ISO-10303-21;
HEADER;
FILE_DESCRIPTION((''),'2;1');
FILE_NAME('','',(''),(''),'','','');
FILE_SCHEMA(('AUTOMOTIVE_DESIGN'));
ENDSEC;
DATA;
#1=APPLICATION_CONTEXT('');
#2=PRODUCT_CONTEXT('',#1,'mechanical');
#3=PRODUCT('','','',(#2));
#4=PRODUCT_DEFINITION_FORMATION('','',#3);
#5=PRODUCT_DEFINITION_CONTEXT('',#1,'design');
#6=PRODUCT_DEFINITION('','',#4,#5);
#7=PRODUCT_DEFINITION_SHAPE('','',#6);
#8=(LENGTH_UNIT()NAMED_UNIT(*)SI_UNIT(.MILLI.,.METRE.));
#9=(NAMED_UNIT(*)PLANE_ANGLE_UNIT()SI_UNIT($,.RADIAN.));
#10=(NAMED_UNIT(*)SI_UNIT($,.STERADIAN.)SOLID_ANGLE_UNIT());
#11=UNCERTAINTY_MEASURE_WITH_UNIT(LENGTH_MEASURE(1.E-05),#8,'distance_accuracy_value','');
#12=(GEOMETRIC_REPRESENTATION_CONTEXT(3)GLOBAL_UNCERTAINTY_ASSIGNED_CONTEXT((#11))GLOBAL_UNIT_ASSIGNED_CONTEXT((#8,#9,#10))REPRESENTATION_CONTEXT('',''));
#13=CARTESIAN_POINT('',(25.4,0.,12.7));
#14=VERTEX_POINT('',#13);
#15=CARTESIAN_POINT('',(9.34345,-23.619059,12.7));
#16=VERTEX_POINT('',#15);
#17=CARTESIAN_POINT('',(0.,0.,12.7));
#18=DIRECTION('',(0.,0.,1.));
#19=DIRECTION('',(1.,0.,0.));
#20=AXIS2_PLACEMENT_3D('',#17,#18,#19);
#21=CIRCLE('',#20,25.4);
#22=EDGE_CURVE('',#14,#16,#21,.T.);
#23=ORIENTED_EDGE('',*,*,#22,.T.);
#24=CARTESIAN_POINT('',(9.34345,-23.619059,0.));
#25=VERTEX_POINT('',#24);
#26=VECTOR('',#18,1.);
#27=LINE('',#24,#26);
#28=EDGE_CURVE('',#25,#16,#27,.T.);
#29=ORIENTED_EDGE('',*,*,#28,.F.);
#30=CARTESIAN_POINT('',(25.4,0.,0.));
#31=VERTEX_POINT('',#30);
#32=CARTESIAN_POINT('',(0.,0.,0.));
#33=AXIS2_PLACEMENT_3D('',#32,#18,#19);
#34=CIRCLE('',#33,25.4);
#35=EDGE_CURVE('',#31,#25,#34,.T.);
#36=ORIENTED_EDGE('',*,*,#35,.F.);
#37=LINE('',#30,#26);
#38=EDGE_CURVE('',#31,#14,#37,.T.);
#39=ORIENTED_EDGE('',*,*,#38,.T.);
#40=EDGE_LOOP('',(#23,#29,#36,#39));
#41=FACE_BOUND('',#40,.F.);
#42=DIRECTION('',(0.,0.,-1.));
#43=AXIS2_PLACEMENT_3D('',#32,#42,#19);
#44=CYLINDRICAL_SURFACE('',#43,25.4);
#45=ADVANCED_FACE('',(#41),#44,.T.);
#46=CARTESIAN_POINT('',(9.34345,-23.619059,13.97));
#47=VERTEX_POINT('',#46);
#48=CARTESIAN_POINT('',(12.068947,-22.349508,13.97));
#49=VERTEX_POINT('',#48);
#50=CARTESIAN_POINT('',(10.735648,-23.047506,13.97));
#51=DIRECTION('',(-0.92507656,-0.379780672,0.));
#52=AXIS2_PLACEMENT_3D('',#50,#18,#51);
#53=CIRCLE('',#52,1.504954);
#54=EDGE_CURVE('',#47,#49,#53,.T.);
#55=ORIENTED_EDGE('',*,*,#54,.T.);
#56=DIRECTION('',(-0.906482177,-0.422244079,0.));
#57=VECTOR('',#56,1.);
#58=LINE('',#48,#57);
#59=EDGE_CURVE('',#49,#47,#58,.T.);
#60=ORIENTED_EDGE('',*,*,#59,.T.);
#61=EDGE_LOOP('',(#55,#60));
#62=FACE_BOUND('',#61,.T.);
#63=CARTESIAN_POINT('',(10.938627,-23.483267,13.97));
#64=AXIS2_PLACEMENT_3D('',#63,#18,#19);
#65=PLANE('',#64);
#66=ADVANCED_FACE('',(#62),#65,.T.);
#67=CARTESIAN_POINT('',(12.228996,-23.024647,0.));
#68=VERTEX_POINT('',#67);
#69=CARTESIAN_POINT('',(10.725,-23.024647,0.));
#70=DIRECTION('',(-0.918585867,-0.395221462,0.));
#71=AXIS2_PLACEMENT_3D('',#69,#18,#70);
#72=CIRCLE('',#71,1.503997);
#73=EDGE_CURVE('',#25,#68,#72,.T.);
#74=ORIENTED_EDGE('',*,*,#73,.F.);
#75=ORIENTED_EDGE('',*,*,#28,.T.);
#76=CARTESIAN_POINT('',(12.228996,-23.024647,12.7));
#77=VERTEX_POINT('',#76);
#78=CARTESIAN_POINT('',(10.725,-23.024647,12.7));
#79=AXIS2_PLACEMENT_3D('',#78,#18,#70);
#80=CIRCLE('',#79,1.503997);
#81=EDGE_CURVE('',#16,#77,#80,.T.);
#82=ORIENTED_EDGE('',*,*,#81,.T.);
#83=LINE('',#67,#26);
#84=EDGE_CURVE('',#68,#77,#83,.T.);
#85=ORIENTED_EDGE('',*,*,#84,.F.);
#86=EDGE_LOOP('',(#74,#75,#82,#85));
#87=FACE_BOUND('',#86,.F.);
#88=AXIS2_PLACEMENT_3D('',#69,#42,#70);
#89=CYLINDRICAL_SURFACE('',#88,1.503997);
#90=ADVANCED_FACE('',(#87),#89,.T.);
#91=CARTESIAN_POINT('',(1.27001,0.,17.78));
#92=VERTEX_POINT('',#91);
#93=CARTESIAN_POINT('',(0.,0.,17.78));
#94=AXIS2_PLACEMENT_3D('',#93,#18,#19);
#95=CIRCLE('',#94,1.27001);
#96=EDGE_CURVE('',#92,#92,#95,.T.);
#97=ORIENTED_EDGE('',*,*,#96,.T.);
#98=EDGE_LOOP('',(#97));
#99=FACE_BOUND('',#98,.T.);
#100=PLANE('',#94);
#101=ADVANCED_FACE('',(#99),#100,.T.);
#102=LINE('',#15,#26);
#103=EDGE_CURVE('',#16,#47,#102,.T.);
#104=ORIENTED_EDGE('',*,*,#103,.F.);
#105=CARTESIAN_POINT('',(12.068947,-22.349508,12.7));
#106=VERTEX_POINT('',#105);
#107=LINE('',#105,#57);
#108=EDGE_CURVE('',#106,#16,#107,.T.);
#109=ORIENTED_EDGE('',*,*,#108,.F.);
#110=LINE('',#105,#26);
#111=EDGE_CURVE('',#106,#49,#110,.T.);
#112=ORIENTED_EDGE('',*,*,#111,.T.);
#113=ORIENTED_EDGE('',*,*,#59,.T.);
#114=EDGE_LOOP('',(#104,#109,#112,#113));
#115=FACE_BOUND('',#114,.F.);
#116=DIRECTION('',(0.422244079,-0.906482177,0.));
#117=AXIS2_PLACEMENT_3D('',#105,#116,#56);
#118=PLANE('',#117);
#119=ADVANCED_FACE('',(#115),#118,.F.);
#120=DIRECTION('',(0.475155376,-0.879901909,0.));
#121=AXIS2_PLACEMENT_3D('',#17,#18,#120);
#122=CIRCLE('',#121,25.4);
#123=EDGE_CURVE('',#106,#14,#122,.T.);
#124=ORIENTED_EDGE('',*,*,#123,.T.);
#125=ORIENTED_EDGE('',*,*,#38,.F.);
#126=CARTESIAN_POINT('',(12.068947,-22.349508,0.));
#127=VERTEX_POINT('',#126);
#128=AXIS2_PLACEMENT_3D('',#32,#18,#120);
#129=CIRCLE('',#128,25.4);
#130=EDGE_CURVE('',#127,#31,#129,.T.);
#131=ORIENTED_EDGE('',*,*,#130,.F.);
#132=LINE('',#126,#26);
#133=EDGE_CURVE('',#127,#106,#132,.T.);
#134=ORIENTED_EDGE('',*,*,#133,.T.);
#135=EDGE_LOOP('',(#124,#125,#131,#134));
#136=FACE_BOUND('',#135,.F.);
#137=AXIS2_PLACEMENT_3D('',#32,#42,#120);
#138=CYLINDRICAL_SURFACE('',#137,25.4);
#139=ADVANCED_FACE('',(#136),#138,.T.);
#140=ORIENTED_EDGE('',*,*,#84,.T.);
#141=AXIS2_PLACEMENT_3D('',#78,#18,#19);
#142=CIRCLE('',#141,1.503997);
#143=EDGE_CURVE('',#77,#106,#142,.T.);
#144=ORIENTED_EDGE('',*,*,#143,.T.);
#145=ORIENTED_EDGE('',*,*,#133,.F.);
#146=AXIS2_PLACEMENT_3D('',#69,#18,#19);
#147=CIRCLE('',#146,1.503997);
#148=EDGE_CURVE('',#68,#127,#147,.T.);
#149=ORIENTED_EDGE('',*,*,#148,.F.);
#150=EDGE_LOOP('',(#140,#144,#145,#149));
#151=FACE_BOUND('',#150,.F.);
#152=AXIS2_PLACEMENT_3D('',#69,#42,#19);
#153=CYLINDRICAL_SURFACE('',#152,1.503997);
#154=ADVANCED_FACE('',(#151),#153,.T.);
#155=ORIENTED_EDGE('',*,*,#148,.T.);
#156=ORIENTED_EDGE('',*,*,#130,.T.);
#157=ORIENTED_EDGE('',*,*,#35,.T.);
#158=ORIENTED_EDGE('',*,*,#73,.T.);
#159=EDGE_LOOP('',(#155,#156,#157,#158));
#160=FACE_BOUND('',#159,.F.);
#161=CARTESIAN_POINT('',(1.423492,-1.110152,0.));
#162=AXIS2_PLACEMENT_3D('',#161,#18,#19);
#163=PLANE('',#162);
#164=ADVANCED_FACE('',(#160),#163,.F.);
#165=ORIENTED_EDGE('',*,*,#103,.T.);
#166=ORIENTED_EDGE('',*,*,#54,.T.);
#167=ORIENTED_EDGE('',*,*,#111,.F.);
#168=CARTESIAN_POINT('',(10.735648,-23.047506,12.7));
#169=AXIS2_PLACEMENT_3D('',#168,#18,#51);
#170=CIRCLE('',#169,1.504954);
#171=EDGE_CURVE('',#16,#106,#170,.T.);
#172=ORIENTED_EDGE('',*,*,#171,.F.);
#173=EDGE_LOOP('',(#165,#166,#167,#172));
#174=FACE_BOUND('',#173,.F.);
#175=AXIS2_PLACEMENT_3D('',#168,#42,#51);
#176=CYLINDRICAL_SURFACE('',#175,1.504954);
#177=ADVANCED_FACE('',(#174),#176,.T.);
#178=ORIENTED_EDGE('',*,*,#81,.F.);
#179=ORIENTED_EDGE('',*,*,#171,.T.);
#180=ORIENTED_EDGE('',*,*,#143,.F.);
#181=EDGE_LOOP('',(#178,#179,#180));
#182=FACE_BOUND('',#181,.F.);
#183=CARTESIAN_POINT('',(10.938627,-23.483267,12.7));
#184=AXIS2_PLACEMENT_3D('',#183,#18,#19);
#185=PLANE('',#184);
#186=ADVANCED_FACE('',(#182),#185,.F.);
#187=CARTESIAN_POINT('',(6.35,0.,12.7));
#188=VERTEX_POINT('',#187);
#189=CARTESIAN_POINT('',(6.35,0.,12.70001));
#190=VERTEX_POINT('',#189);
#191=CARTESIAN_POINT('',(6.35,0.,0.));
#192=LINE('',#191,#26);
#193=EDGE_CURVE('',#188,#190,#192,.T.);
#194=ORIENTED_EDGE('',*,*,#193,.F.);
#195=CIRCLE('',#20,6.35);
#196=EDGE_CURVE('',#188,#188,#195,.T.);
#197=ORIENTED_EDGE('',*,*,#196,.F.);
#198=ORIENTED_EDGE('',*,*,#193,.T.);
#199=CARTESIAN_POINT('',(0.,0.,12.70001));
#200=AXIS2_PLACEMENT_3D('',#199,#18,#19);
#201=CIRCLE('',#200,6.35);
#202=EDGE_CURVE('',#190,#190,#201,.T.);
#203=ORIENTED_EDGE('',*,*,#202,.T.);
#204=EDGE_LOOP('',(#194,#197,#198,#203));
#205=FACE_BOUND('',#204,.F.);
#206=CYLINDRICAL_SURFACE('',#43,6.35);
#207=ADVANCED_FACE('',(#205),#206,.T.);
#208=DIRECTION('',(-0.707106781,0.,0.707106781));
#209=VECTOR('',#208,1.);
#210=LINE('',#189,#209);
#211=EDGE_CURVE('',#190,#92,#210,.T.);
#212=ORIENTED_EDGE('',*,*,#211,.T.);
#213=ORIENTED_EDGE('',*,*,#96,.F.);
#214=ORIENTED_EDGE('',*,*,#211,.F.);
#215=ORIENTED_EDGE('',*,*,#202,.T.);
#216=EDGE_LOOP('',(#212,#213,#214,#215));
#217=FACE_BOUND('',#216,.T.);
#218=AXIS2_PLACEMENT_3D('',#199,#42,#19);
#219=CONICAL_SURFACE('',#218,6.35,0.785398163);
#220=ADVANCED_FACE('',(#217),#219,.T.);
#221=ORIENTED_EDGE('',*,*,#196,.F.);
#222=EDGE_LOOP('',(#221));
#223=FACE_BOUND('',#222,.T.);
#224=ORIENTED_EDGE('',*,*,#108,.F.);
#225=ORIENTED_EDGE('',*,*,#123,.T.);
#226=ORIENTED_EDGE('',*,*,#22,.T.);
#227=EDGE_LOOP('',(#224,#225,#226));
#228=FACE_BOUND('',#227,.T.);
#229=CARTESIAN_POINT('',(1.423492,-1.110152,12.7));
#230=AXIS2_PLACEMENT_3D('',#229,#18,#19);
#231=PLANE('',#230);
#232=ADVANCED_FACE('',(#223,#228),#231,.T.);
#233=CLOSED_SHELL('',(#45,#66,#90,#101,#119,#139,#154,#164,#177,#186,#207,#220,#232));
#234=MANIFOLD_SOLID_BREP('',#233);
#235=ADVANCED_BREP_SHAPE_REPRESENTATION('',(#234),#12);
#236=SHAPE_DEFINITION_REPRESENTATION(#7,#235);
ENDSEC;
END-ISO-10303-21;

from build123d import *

# Parameters (mm, degrees)
F0_R     = 6.35
F1_DEPTH = 12.7
F2_DEPTH = 17.78
F3_SIZE  = 5.07999
F5_DEPTH = 1.27


# Not quite as in the source:
# - a fillet or chamfer is up to 0.001 mm smaller than in the source, because OpenCascade refuses the exact size


with BuildPart() as f1:
    # F0 (on Top) → F1 (new body)
    with BuildSketch(Plane.XY):
        with BuildLine():
            ThreePointArc((12.068946544, -22.3495084805), (21.8141151805, -13.011701614), (25.4, 0))
            ThreePointArc((25.4, 0), (-21.0057565892, 14.2799926511), (9.3434495971, -23.6190590335))
            ThreePointArc((9.3434495971, -23.6190590335), (10.0899459577, -21.6613011879), (12.068946544, -22.3495084805))
        make_face()
        Circle(F0_R, mode=Mode.SUBTRACT)
        with BuildLine():
            ThreePointArc((12.068946544, -22.3495084805), (10.0899459577, -21.6613011879), (9.3434495971, -23.6190590335))
            ThreePointArc((9.3434495971, -23.6190590335), (10.7249996167, -23.0246472986), (12.068946544, -22.3495084805))
        make_face()
        with BuildLine():
            ThreePointArc((12.068946544, -22.3495084805), (10.7249996167, -23.0246472986), (9.3434495971, -23.6190590335))
            ThreePointArc((9.3434495971, -23.6190590335), (11.0284458537, -24.4977142177), (12.2289962148, -23.0246472986))
            ThreePointArc((12.2289962148, -23.0246472986), (12.1884369016, -22.677722119), (12.068946544, -22.3495084805))
        make_face()
    extrude(amount=F1_DEPTH)

    # F0 (on Top) → F2 (join)
    with BuildSketch(Plane.XY):
        Circle(F0_R)
    extrude(amount=F2_DEPTH)

    # F3 (size 5.08 in the source; OpenCascade refuses exactly that, so slightly less here)
    f3_edges = [f1.edges().sort_by_distance(p)[0] for p in [
        (-6.35, 0, 17.78),
    ]]
    chamfer(f3_edges, length=F3_SIZE)

    # F4 (on face) → F5 (join)
    with BuildSketch(Plane.XY.offset(12.7)):
        with BuildLine():
            Line((12.068946544, -22.3495084805), (9.3434495971, -23.6190590335))
            ThreePointArc((9.3434495971, -23.6190590335), (11.3711055832, -24.4117207278), (12.068946544, -22.3495084805))
        make_face()
    extrude(amount=F5_DEPTH)


solid = f1.part
